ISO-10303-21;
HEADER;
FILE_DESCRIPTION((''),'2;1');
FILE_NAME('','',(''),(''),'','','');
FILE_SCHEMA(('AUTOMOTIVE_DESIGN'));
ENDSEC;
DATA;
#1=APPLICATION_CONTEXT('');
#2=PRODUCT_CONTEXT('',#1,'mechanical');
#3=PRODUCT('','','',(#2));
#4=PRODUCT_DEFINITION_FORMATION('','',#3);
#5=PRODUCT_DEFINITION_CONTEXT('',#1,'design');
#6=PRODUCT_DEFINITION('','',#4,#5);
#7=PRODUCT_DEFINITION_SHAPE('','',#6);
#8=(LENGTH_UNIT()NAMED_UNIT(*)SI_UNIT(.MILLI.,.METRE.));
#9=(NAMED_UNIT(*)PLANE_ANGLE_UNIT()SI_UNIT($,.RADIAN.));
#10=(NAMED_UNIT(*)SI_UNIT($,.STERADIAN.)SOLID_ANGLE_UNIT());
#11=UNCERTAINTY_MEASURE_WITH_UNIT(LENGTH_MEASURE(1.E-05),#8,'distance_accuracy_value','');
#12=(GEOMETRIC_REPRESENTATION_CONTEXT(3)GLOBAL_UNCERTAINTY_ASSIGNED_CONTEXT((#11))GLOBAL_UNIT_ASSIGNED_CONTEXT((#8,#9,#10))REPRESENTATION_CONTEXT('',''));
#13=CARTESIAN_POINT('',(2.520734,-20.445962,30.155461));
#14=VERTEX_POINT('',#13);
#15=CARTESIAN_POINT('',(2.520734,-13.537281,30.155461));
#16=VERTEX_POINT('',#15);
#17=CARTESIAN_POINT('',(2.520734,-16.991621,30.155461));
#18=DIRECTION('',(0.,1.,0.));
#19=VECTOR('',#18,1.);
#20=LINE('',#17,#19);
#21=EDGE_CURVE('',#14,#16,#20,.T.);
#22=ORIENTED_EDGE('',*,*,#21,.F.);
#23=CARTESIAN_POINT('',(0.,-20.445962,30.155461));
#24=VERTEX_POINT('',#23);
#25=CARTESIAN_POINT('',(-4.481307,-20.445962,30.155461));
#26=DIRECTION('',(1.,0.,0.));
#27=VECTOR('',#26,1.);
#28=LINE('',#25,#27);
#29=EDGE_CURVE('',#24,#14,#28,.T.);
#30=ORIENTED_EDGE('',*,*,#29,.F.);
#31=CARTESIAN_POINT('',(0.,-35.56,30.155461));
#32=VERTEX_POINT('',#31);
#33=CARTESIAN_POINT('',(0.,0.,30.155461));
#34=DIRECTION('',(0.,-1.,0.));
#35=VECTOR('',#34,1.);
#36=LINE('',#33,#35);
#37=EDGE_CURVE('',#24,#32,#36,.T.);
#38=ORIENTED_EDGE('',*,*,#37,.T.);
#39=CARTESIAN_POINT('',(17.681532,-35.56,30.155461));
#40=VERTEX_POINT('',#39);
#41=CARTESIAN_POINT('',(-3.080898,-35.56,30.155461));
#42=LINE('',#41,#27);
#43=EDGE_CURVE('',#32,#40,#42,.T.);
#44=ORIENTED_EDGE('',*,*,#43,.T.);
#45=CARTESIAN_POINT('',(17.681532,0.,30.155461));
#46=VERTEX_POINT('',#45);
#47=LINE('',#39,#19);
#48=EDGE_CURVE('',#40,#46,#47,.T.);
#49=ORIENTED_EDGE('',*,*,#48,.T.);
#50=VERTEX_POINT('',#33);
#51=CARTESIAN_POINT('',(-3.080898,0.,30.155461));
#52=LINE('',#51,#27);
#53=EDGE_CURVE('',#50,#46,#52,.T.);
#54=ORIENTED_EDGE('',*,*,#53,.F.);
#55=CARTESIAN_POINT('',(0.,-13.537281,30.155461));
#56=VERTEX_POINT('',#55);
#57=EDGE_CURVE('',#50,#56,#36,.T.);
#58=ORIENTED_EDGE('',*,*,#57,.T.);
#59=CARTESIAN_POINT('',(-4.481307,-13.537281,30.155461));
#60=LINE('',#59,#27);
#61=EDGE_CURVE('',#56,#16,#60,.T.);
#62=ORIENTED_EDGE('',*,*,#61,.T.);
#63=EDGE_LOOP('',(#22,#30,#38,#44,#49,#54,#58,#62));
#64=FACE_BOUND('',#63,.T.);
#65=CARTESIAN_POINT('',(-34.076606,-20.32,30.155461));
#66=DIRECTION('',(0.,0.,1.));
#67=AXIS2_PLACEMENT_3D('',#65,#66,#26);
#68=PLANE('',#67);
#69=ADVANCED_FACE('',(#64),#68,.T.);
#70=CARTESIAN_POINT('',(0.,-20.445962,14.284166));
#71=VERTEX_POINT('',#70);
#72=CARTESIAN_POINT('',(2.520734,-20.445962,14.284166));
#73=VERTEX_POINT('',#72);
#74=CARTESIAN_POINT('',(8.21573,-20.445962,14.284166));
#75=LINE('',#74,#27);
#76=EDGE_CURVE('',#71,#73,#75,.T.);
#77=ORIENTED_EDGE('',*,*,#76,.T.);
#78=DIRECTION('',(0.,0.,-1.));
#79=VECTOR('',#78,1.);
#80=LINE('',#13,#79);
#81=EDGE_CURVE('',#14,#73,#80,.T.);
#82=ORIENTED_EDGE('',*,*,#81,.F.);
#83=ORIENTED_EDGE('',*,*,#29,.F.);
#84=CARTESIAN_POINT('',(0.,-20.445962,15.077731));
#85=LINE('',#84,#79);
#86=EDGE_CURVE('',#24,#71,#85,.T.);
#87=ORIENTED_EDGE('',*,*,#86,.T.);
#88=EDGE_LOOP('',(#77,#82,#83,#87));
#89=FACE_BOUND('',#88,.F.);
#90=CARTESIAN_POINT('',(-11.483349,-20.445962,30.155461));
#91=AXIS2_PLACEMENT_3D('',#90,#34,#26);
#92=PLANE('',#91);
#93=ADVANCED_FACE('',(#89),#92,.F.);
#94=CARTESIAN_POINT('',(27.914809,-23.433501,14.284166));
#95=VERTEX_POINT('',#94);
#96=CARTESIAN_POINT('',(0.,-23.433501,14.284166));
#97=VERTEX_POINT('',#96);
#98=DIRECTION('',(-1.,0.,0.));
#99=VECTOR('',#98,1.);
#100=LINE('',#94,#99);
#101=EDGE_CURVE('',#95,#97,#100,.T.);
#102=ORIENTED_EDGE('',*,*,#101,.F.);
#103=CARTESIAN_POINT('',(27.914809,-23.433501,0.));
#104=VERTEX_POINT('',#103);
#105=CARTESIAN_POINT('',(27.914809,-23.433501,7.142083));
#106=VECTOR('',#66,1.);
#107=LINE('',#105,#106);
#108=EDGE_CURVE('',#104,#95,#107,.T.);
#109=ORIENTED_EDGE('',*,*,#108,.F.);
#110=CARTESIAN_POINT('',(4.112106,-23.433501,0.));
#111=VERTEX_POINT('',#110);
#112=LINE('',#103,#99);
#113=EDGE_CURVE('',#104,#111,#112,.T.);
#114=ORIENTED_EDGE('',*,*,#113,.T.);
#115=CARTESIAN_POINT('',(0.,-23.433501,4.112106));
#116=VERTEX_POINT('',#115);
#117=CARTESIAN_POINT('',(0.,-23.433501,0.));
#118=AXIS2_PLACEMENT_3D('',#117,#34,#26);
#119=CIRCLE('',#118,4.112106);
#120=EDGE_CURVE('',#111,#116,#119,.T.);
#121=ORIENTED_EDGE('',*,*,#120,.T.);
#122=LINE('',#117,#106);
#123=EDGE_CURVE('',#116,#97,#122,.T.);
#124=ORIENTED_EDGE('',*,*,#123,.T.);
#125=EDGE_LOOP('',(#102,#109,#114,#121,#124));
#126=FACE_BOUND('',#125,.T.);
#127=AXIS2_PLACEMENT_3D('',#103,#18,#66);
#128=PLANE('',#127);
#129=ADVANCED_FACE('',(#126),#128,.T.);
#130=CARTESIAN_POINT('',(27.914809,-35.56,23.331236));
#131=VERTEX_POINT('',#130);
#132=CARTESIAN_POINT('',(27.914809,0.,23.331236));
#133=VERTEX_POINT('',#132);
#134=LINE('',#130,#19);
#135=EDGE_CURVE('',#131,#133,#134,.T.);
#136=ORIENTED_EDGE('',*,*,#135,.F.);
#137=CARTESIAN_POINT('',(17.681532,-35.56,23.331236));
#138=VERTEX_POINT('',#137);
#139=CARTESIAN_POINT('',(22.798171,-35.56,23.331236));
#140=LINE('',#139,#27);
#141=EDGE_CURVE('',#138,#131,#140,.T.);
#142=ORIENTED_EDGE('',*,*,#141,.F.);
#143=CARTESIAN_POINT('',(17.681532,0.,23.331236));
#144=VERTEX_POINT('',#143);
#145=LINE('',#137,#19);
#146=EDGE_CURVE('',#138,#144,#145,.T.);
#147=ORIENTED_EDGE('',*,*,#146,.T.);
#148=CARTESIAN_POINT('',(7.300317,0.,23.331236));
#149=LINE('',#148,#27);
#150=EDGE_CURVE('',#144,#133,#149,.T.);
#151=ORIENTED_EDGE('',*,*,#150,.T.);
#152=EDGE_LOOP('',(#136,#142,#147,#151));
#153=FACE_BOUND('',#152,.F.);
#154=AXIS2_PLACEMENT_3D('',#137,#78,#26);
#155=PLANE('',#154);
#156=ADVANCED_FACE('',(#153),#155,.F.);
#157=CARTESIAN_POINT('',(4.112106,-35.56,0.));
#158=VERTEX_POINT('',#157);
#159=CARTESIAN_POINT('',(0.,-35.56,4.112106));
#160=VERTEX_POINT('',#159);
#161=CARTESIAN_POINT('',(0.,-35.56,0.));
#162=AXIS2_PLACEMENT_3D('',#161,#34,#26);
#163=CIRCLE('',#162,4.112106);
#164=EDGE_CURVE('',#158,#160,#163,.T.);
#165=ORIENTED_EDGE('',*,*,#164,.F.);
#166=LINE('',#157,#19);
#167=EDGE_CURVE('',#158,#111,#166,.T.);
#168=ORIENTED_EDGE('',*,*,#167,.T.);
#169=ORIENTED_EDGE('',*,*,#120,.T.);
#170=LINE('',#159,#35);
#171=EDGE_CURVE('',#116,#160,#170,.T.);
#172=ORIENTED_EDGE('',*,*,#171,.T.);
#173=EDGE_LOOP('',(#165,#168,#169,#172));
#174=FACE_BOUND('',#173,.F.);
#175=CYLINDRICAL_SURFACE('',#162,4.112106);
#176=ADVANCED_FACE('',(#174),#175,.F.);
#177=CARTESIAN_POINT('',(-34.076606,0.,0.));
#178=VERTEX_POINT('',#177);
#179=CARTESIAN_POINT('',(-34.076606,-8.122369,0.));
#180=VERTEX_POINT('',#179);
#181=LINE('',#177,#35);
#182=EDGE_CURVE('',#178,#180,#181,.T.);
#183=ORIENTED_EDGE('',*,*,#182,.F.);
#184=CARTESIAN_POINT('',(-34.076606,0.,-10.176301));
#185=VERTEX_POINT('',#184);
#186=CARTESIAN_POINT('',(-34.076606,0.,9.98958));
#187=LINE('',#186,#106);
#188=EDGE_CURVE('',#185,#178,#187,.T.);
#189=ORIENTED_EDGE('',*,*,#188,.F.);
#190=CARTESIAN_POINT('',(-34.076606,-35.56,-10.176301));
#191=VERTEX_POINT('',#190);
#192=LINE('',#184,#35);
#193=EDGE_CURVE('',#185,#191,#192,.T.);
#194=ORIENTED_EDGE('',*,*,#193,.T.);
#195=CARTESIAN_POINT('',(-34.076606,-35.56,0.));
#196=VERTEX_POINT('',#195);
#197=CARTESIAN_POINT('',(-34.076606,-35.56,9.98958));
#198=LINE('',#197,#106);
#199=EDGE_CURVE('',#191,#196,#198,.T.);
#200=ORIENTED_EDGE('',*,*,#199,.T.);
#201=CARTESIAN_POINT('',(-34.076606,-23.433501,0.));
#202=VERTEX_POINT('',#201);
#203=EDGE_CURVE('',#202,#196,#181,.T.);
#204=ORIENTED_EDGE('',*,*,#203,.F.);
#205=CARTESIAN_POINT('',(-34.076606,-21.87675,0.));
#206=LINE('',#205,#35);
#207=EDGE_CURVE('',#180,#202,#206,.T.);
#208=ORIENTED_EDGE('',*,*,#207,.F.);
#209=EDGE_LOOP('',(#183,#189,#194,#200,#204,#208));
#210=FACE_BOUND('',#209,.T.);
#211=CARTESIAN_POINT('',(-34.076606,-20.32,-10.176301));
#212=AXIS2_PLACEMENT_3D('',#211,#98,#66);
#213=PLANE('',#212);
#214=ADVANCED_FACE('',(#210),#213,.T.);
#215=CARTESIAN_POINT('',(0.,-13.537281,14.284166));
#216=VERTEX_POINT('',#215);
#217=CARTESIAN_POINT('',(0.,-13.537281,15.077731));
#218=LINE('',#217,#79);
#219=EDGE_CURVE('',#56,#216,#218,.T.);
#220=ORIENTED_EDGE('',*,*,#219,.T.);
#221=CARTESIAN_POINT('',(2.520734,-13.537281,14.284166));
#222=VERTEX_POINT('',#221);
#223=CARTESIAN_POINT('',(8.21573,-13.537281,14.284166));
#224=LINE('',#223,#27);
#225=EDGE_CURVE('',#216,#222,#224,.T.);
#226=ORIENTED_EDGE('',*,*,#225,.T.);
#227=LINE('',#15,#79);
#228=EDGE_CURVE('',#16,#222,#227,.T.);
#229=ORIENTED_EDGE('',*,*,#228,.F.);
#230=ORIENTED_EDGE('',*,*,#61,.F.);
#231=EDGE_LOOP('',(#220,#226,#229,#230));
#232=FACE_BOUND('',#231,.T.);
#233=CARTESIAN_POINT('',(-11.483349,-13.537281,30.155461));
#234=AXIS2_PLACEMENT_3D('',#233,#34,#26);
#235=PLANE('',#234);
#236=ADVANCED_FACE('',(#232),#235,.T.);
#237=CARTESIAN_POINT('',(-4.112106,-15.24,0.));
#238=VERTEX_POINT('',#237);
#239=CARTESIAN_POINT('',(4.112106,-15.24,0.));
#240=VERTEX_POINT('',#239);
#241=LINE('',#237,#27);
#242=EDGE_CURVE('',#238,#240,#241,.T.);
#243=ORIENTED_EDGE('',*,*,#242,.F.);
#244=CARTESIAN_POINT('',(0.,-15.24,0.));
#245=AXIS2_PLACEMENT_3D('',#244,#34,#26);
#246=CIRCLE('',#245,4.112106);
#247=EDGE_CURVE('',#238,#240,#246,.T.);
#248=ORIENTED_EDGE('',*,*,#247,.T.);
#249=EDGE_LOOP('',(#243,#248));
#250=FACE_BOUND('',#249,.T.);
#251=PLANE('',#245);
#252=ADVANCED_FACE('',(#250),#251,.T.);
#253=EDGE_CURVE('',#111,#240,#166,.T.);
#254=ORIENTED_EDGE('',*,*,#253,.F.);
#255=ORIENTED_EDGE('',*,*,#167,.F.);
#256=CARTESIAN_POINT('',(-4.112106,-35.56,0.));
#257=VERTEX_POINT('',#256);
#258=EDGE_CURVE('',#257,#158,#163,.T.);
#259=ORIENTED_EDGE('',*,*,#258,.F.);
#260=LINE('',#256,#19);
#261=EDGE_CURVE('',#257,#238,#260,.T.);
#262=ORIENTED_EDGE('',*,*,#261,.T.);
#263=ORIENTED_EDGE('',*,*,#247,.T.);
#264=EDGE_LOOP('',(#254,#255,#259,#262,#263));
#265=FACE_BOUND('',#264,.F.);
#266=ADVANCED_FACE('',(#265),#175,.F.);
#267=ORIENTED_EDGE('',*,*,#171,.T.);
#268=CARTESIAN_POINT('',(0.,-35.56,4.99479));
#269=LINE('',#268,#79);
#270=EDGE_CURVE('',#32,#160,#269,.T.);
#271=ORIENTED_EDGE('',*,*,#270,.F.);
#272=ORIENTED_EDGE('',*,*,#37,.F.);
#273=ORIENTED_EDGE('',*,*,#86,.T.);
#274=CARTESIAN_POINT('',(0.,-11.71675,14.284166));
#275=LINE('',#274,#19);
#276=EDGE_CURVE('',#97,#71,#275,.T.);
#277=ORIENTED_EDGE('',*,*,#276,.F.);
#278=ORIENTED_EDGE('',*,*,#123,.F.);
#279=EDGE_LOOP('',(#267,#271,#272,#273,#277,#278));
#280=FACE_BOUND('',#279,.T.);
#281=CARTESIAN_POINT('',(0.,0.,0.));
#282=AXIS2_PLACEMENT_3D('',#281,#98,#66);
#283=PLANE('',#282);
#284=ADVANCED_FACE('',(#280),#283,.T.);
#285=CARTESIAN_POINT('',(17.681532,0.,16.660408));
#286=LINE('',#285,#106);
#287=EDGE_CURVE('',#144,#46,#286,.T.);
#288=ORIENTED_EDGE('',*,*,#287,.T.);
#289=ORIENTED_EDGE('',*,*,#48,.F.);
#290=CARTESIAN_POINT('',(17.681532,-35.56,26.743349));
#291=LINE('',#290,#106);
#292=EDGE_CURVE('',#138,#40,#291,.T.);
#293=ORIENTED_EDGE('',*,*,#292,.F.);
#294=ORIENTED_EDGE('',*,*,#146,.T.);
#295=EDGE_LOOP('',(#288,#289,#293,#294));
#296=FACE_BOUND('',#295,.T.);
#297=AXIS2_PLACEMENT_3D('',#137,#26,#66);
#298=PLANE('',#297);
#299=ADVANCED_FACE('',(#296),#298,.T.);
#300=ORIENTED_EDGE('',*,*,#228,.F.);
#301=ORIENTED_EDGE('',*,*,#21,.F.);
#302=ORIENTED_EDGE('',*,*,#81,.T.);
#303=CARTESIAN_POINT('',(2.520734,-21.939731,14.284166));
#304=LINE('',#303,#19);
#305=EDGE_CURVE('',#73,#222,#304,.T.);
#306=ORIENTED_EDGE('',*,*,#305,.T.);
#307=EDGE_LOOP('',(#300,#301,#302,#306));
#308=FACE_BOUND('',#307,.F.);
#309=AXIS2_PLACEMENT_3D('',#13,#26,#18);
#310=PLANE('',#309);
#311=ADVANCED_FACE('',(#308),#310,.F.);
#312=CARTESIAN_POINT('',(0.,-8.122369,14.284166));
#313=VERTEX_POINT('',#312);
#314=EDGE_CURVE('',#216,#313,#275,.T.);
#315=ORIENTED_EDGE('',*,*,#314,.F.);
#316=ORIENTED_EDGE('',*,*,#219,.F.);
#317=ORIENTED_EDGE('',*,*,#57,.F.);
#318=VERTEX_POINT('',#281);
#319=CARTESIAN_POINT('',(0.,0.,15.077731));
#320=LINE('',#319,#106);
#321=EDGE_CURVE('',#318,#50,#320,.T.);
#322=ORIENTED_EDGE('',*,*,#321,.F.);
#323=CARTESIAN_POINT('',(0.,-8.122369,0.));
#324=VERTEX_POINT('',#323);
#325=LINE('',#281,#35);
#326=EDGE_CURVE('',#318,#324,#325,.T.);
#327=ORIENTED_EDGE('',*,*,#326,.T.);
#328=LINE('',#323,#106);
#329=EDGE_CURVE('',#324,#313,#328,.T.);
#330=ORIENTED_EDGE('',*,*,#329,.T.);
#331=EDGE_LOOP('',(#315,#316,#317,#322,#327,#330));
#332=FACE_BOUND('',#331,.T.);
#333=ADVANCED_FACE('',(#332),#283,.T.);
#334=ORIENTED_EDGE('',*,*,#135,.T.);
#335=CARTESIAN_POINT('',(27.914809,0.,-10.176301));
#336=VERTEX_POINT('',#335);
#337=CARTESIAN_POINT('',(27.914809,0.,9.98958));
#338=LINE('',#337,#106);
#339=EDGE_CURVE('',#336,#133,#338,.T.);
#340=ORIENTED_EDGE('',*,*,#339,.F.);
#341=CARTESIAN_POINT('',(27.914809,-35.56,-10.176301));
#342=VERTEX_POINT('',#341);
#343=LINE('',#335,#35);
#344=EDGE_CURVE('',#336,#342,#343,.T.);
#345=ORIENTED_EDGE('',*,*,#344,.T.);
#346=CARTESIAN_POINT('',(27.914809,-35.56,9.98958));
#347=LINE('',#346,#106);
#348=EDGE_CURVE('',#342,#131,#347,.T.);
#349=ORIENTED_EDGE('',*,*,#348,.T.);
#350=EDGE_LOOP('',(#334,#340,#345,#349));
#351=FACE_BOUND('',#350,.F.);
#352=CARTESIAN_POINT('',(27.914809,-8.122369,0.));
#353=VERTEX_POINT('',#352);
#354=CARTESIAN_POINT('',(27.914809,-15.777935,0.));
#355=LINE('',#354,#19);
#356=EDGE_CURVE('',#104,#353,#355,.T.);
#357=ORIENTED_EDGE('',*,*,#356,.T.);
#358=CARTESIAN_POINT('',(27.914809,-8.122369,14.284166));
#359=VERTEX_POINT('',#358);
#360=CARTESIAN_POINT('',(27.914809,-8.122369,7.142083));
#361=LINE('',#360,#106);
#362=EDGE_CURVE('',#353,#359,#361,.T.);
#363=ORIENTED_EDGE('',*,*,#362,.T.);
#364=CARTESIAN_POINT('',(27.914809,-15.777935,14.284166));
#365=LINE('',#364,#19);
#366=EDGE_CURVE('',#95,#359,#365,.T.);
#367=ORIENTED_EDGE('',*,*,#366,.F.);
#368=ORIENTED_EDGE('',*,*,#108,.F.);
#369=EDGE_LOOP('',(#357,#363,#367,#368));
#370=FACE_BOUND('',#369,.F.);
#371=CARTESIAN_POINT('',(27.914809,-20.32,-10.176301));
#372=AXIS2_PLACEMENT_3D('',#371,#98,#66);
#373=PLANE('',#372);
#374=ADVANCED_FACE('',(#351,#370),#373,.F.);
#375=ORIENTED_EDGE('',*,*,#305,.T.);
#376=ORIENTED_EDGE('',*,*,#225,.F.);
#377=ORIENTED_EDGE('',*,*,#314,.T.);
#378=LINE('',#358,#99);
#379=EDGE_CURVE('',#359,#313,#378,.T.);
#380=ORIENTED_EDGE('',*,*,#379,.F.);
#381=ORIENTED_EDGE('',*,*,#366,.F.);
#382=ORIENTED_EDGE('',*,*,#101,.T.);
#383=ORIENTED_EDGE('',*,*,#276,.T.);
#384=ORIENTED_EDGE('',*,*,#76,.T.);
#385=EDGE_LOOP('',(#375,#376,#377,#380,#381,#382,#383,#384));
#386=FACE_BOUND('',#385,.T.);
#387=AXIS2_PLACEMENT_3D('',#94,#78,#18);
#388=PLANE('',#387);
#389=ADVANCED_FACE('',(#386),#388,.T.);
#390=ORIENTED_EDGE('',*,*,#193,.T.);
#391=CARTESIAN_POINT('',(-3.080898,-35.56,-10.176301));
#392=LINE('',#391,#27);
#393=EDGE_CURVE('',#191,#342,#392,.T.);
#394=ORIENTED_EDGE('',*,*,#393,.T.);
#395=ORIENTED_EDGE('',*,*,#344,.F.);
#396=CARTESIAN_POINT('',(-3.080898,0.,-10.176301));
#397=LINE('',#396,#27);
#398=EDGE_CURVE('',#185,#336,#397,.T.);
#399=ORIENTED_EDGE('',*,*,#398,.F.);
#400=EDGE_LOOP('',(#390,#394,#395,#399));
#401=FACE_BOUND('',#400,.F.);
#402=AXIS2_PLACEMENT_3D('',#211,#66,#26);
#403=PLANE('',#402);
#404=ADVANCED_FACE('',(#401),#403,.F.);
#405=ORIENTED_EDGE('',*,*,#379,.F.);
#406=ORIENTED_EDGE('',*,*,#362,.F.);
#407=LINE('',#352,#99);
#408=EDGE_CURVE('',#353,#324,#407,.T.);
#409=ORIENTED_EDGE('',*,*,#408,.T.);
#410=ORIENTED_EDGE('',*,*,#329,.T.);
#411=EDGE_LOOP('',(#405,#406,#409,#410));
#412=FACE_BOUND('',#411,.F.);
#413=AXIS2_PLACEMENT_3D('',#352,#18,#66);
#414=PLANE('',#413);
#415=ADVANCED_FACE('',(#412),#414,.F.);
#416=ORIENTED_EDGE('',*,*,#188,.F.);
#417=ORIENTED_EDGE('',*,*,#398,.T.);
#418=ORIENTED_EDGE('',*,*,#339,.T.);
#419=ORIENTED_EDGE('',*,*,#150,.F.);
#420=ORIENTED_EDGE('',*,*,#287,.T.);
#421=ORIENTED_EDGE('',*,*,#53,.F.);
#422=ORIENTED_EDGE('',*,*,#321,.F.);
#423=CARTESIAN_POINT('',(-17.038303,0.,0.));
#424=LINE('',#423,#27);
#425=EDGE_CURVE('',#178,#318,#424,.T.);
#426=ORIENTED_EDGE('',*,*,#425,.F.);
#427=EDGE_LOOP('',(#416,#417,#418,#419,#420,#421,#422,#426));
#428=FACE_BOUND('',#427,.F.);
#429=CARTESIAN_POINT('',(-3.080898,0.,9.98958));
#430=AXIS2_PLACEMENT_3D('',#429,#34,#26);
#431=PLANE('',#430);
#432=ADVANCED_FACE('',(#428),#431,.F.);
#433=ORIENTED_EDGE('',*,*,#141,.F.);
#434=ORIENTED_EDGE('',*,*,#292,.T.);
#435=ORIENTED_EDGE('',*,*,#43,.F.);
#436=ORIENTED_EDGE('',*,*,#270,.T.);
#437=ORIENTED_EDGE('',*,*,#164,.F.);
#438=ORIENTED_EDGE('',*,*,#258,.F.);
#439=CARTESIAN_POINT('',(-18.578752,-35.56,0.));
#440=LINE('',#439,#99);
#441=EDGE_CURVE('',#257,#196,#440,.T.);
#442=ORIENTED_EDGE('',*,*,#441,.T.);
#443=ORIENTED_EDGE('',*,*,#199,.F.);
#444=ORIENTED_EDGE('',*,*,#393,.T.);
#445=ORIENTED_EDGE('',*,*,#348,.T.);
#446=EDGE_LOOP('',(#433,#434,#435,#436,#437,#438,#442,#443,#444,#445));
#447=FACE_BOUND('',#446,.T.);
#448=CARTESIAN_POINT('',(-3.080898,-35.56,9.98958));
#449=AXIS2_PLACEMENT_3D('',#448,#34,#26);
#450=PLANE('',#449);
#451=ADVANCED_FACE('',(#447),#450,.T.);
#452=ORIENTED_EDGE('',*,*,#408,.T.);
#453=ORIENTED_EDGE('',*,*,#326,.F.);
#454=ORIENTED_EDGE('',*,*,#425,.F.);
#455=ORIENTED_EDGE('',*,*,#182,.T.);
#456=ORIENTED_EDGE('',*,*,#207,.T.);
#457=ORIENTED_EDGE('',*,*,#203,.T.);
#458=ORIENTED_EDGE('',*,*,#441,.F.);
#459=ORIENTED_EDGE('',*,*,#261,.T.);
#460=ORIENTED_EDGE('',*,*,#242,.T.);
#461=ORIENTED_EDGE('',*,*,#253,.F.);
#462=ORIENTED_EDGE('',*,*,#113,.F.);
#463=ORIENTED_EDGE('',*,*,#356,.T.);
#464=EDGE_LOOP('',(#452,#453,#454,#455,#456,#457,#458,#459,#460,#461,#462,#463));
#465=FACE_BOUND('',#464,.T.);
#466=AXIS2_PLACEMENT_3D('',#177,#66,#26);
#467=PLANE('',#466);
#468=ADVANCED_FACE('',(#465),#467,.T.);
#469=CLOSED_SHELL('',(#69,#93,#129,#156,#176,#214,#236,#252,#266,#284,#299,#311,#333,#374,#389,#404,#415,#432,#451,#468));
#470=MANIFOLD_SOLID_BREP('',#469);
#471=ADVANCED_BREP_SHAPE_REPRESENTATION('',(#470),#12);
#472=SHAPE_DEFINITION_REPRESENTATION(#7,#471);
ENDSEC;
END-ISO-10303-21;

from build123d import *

# Parameters (mm, degrees)
F0_W           = 61.9914149866
F0_H           = 40.331762284
F1_DEPTH       = 20.32
F2_DEPTH       = 15.24
F5_R           = 4.1121060328
F6_DEPTH       = 20.32
F7_W           = 14.0040833503
F7_H           = 6.9086803123
F8_DEPTH       = 17.78
F9_W           = 15.3111321852
F9_H           = 14.2841655761
F10_DEPTH      = 61.9924149866
F10_DEPTH_BACK = 25.4
F11_W          = 10.2332767595
F11_H          = 6.8242249937
F12_DEPTH      = 35.561
F13_W          = 34.0766059235
F13_H          = 30.1554612815
F14_DEPTH      = 35.561


# Not quite as in the source:
# - the program builds the solid bodies; features that only make, move or delete a surface that nothing else refers to are left out


with BuildPart() as f1:
    # F0 (on Front) → F1 (new body)
    with BuildSketch(Plane.XZ):
        with Locations((-3.0808984302, 9.9895801395)):
            Rectangle(F0_W, F0_H)
    extrude(amount=F1_DEPTH)

    # F2 (add): a face of the model
    f2_faces = [f1.faces().sort_by_distance(p)[0] for p in [
        (-3.0808984302, -20.32, 9.9895801395),
    ]]
    extrude(f2_faces, amount=F2_DEPTH)

    # F5 (on face) → F6 (cut)
    with BuildSketch(Plane.XZ.offset(35.56)):
        Circle(F5_R)
    extrude(amount=-F6_DEPTH, mode=Mode.SUBTRACT)

    # F7 (on face) → F8 (cut)
    with BuildSketch(Plane.XY.offset(30.1554612815)):
        with Locations((-4.4813072309, -16.991621349)):
            Rectangle(F7_W, F7_H)
    extrude(amount=-F8_DEPTH, mode=Mode.SUBTRACT)

    # F9 (on face) → F10 (cut, two sides)
    with BuildSketch(Plane.YZ.offset(27.9148090631)) as f10_sk:
        with Locations((-15.7779348083, 7.1420827881)):
            Rectangle(F9_W, F9_H)
    extrude(amount=-F10_DEPTH, mode=Mode.SUBTRACT)
    extrude(f10_sk.sketch, amount=F10_DEPTH_BACK, mode=Mode.SUBTRACT)

    # F11 (on face) → F12 (cut, through all)
    with BuildSketch(Plane.XZ.offset(35.56)):
        with Locations((22.7981706833, 26.7433487847)):
            Rectangle(F11_W, F11_H)
    extrude(amount=-F12_DEPTH, mode=Mode.SUBTRACT)

    # F13 (on face) → F14 (cut, through all)
    with BuildSketch(Plane.XZ):
        with Locations((-17.0383029617, 15.0777306408)):
            Rectangle(F13_W, F13_H)
    extrude(amount=F14_DEPTH, mode=Mode.SUBTRACT)


solid = f1.part
